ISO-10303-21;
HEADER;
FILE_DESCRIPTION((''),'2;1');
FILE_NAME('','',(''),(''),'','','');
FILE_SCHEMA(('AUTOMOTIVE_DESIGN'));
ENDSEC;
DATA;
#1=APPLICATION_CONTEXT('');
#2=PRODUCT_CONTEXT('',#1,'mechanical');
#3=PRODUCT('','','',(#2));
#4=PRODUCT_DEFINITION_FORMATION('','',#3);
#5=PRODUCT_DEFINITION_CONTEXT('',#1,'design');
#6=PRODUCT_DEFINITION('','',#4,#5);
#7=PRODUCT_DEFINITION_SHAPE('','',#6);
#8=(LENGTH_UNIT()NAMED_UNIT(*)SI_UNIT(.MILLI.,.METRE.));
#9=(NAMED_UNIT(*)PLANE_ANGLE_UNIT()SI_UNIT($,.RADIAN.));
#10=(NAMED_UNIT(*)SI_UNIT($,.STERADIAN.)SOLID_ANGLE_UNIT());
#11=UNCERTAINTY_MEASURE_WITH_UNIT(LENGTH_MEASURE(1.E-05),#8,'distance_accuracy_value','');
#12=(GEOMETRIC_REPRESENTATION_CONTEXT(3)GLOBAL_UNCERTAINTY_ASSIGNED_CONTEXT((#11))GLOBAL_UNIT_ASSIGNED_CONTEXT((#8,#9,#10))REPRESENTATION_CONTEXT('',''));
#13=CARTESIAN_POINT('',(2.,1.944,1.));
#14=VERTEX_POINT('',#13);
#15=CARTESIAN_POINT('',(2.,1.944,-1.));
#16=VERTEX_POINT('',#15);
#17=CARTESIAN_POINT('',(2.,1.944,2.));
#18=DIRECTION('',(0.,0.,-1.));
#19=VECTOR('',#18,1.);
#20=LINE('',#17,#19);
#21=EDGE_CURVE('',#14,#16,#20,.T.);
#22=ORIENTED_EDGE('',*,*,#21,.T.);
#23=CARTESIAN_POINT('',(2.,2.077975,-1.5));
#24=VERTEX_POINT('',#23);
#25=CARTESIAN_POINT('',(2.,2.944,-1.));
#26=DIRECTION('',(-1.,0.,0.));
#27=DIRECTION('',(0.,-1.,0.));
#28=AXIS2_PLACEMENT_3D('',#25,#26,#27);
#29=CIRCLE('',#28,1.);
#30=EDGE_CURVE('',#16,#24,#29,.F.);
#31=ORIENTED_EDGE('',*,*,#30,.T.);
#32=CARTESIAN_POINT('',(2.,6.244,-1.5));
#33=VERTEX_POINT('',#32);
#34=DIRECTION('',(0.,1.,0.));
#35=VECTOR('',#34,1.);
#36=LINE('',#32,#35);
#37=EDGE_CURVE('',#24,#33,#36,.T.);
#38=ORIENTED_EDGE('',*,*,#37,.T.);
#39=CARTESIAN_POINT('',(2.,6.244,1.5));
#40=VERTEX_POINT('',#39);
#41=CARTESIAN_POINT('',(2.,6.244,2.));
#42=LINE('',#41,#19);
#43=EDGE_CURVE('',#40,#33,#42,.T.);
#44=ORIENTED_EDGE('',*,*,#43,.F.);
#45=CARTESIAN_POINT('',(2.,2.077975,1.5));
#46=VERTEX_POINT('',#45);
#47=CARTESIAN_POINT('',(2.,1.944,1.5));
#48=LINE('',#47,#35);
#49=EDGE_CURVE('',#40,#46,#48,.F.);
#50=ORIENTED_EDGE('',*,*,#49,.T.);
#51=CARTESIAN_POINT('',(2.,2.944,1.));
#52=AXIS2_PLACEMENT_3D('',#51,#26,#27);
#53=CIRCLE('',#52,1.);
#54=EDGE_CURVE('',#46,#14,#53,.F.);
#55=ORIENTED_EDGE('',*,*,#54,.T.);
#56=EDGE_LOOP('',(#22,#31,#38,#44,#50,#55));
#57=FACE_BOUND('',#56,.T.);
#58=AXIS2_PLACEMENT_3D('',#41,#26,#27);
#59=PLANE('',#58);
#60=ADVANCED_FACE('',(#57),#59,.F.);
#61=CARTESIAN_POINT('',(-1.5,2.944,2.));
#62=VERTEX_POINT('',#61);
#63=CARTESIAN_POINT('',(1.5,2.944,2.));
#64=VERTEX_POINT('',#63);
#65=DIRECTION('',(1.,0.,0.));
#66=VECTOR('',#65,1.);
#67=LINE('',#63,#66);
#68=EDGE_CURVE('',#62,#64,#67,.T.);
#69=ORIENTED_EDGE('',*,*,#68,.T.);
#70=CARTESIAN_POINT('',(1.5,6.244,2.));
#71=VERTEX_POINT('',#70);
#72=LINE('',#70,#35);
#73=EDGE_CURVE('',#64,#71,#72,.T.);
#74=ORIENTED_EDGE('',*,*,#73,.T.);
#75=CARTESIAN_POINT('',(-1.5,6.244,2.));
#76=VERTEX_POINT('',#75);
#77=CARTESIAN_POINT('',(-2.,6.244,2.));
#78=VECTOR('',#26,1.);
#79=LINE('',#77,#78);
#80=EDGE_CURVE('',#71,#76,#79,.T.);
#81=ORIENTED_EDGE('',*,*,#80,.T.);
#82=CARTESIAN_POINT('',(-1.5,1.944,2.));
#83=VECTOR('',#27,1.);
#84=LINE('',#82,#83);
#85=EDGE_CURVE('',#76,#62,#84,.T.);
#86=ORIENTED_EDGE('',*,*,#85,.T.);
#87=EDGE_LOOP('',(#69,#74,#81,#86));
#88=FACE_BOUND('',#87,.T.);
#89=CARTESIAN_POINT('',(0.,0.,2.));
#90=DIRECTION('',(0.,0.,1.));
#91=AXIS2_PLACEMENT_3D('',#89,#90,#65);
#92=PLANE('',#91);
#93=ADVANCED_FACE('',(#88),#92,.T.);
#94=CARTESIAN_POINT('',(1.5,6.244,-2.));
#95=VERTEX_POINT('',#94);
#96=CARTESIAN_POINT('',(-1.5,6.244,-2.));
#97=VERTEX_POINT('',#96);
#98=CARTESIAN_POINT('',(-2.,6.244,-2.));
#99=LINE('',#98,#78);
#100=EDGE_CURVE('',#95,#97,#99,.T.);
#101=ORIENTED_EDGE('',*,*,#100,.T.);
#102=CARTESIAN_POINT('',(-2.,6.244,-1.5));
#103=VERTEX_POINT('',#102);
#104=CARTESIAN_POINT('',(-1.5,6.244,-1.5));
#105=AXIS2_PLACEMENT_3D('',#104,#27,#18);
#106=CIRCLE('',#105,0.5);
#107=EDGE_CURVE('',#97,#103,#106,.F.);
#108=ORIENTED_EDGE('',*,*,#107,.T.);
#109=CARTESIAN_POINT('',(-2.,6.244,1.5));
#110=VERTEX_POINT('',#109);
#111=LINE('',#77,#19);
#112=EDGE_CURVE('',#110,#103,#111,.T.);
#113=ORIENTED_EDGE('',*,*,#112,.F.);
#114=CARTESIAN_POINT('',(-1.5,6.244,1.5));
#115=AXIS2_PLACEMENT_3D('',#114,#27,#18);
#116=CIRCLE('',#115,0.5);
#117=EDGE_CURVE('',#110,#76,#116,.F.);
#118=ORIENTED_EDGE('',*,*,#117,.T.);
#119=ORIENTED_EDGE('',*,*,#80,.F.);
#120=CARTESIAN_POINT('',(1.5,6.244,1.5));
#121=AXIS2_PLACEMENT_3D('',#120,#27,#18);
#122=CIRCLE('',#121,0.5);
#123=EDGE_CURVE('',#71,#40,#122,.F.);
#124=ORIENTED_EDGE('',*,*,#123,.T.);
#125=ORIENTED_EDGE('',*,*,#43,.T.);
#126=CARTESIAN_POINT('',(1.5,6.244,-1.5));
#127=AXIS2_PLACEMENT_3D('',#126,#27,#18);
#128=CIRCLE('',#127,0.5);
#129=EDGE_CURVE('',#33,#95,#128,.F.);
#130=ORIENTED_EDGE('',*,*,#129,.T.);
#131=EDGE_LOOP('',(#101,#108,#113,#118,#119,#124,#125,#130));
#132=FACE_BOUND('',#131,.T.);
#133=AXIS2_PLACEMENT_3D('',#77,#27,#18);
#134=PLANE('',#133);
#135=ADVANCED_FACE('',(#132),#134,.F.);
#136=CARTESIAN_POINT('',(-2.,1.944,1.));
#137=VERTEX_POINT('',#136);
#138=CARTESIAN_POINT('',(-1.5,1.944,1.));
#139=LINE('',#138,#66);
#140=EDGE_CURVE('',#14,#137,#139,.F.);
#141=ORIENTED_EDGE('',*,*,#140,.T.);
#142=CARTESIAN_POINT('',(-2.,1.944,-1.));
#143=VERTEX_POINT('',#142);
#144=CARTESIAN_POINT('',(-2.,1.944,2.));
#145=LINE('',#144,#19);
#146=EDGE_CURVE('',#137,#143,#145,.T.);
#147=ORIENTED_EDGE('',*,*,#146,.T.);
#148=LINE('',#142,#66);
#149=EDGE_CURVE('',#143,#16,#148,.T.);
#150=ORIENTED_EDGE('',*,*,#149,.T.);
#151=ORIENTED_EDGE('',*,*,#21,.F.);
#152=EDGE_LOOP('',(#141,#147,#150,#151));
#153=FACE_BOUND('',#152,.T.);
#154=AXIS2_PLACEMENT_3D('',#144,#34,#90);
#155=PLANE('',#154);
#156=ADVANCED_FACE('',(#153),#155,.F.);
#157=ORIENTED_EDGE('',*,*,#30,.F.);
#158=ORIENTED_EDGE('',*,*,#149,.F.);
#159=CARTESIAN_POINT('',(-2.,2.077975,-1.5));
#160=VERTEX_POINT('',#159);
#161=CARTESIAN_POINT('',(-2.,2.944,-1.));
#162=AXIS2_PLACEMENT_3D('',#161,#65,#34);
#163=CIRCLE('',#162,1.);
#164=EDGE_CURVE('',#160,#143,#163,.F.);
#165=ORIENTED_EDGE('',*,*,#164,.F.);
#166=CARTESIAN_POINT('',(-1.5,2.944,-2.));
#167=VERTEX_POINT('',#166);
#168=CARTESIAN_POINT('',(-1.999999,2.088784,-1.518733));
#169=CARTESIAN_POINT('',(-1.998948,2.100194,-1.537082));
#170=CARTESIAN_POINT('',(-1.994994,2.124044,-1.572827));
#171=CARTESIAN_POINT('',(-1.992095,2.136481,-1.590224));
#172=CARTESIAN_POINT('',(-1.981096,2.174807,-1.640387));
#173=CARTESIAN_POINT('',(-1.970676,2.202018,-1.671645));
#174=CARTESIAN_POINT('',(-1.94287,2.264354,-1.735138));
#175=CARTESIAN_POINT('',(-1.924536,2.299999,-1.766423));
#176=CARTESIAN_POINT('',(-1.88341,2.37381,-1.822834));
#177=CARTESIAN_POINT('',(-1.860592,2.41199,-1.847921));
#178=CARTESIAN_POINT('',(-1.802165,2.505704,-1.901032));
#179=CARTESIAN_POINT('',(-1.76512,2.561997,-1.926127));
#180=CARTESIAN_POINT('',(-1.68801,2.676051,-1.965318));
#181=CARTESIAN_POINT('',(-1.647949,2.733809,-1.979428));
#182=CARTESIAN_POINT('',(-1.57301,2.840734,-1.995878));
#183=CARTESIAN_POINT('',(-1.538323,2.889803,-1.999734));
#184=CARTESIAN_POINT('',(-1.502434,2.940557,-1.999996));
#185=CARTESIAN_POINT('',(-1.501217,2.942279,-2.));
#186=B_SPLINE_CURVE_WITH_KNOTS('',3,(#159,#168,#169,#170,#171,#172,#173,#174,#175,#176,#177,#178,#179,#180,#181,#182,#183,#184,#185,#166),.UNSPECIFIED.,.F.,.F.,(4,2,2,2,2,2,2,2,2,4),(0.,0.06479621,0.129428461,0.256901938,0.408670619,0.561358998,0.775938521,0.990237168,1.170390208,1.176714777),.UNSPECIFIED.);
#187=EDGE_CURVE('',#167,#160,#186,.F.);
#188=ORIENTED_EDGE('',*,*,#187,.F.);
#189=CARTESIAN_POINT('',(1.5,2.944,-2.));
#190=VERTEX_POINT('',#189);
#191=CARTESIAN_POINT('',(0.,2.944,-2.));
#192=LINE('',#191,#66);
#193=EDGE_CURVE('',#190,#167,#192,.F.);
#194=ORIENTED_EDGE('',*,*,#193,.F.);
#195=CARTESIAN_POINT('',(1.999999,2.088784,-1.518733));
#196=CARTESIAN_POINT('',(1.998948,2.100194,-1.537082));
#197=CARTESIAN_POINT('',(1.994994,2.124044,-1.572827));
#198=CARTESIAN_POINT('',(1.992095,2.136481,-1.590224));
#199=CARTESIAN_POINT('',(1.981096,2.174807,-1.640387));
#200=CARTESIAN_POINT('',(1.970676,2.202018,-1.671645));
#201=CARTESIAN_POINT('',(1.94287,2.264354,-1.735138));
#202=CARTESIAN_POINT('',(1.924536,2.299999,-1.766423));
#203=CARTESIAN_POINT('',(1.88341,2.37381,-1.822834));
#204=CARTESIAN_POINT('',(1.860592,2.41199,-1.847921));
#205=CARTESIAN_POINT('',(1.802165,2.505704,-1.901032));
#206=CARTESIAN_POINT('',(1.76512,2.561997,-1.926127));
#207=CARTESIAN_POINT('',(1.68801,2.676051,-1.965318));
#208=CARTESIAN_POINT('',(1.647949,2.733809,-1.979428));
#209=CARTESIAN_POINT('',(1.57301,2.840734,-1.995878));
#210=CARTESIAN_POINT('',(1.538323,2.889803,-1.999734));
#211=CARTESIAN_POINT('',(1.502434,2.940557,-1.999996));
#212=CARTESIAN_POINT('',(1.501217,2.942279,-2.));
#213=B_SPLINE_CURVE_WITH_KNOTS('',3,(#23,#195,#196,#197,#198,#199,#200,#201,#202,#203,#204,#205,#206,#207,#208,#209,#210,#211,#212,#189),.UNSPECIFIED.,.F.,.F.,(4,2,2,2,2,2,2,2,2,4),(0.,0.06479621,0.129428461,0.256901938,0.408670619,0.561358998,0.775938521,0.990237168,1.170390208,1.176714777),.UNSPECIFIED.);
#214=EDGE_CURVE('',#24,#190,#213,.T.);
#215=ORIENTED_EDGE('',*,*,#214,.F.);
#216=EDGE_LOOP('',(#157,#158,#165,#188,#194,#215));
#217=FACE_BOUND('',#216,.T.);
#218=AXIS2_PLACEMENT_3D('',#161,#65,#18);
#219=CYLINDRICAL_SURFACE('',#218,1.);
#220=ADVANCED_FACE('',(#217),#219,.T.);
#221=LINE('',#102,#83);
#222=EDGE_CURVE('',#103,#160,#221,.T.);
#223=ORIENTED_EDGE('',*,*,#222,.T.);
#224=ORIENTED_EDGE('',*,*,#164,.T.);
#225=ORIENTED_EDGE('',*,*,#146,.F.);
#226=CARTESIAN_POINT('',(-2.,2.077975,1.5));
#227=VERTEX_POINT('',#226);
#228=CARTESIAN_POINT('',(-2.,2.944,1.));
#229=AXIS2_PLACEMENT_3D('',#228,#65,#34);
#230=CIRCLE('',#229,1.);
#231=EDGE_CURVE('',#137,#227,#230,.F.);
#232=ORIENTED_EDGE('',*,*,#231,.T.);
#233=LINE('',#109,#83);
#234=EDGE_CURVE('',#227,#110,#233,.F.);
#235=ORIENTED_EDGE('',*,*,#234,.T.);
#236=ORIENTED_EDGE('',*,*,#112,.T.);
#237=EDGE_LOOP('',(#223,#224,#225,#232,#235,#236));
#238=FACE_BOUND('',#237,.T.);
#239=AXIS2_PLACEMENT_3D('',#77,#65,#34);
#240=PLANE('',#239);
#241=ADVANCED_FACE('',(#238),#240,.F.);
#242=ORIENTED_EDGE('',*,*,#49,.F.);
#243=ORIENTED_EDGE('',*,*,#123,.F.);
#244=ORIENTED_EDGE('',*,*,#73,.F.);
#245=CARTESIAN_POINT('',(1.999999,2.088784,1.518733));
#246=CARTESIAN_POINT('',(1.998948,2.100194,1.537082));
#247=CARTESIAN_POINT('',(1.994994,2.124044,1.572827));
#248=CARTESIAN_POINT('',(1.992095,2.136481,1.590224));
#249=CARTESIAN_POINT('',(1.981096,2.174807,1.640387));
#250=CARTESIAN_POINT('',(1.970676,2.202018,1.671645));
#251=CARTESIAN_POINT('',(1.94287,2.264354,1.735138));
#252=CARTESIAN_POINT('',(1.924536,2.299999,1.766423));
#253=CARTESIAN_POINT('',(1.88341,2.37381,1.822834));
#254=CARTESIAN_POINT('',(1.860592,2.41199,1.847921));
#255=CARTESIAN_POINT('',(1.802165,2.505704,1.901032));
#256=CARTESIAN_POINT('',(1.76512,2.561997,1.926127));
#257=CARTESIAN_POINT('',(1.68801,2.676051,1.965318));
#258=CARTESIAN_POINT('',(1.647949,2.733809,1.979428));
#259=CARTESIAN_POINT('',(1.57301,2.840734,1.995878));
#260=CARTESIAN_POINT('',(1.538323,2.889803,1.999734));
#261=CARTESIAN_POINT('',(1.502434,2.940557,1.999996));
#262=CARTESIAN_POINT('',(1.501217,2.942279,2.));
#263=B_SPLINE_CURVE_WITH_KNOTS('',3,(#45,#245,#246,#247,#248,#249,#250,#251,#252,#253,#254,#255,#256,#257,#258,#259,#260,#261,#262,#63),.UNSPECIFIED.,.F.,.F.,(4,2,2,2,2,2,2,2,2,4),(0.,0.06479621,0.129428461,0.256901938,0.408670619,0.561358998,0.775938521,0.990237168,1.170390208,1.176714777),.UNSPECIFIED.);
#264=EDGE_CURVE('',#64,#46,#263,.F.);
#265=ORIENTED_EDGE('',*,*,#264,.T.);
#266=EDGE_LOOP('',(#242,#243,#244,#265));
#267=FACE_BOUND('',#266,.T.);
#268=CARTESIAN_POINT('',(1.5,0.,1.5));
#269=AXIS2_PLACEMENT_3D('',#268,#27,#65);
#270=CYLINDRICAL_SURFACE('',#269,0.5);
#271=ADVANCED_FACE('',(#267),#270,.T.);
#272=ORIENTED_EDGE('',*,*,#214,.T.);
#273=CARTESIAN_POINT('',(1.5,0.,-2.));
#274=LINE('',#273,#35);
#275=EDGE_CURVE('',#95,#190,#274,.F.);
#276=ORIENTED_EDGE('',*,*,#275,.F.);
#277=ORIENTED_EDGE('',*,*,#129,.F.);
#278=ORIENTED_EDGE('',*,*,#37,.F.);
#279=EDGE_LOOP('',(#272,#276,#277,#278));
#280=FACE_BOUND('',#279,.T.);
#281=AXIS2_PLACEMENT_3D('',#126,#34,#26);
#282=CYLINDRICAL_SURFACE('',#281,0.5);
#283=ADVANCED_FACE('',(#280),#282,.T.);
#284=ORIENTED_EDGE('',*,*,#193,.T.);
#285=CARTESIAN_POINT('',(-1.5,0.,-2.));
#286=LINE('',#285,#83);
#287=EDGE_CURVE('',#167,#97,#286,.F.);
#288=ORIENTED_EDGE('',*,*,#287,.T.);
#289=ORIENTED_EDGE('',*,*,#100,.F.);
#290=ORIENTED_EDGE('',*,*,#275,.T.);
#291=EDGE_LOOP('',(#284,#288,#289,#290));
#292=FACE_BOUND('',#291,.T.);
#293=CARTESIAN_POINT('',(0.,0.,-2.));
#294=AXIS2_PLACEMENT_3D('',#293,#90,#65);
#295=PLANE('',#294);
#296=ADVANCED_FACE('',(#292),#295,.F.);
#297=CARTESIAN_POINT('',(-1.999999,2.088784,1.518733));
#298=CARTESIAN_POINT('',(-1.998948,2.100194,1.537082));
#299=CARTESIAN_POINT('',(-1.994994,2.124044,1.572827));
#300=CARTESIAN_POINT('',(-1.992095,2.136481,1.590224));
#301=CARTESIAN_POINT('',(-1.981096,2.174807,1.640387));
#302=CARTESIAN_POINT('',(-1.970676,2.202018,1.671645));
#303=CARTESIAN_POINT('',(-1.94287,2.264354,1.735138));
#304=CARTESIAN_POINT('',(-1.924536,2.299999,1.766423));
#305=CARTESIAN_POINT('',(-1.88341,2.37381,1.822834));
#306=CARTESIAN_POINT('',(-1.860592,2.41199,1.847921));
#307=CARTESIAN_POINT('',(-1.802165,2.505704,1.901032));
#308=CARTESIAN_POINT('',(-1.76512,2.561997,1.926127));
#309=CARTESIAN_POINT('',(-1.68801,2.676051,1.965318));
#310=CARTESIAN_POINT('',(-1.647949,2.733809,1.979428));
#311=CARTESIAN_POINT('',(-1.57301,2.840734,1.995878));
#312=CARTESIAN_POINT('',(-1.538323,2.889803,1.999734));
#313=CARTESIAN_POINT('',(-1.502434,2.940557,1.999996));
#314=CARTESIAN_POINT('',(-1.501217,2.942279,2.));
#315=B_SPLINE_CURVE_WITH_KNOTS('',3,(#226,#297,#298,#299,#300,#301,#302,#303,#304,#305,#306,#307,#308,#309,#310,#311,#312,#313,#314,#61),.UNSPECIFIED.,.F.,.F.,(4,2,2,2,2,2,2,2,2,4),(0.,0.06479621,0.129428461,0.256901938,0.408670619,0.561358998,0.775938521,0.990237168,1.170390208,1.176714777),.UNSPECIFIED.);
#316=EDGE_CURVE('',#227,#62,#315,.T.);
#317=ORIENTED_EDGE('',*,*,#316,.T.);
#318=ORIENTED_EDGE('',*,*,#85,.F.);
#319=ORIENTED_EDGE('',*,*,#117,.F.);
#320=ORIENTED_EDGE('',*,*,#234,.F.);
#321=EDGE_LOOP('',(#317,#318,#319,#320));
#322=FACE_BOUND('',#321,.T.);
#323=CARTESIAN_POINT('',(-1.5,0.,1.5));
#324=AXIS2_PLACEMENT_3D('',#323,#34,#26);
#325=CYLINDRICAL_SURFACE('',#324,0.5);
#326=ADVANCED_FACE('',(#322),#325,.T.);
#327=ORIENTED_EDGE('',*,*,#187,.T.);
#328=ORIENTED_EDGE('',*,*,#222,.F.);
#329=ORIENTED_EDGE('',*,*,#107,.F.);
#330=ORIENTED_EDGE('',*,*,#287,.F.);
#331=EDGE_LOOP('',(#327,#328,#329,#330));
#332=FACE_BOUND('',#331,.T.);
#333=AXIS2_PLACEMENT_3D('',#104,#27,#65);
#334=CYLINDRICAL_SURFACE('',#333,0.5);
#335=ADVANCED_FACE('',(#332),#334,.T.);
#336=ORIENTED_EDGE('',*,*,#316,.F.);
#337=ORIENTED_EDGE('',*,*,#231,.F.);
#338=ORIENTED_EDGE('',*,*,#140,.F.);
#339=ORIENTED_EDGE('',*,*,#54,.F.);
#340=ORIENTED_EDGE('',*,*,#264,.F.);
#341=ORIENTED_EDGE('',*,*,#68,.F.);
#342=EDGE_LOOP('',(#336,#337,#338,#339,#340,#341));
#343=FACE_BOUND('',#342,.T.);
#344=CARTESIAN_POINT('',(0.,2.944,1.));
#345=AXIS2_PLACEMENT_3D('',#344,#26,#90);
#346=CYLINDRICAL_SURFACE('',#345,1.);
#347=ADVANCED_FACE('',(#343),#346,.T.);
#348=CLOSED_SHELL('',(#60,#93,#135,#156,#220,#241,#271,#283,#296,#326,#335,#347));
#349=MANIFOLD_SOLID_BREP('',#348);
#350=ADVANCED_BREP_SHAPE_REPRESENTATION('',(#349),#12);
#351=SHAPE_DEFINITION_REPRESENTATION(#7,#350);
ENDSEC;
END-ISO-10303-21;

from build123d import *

# Parameters (mm, degrees)
SKETCH1_W           = 4
SKETCH1_H           = 4.3
BOSS_EXTRUDE1_DEPTH = 2
FILLET1_R           = 0.5
FILLET2_R           = 1


with BuildPart() as part:
    # Sketch1 → Boss-Extrude1 (new, symmetric)
    with BuildSketch(Plane.XY):
        with Locations((0, 4.094)):
            Rectangle(SKETCH1_W, SKETCH1_H)
    extrude(amount=BOSS_EXTRUDE1_DEPTH, both=True)

    # Fillet1
    # the kernel refuses this fillet: 0.5 mm, written as the material it takes off along each edge
    with BuildSketch(Plane(origin=(2, 7.494, 2), x_dir=(-1, 0, 0), z_dir=(0, -1, 0)), Plane(origin=(-2, 0.694, 2), x_dir=(1, 0, 0), z_dir=(0, 1, 0)), Plane(origin=(2, 7.494, -2), x_dir=(0, 0, 1), z_dir=(0, -1, 0))) as fillet1_piece_1:
        with BuildLine():
            CenterArc((FILLET1_R, FILLET1_R), FILLET1_R, 180, 90)
            Line((0, FILLET1_R), (-FILLET1_R * 0.02, FILLET1_R))
            Line((-FILLET1_R * 0.02, FILLET1_R), (-FILLET1_R * 0.02, -FILLET1_R * 0.02))
            Line((-FILLET1_R * 0.02, -FILLET1_R * 0.02), (FILLET1_R, -FILLET1_R * 0.02))
            Line((FILLET1_R, -FILLET1_R * 0.02), (FILLET1_R, 0))
        make_face()
    extrude(amount=6.8, mode=Mode.SUBTRACT)
    with BuildSketch(Plane(origin=(-2, 0.694, -2), x_dir=(1, 0, 0), z_dir=(0, 1, 0))) as fillet1_piece_2:
        with BuildLine():
            CenterArc((FILLET1_R, -FILLET1_R), FILLET1_R, 90, 90)
            Line((0, -FILLET1_R), (-FILLET1_R * 0.02, -FILLET1_R))
            Line((-FILLET1_R * 0.02, -FILLET1_R), (-FILLET1_R * 0.02, FILLET1_R * 0.02))
            Line((-FILLET1_R * 0.02, FILLET1_R * 0.02), (FILLET1_R, FILLET1_R * 0.02))
            Line((FILLET1_R, FILLET1_R * 0.02), (FILLET1_R, 0))
        make_face()
    extrude(amount=6.8, mode=Mode.SUBTRACT)

    # Fillet2
    # the kernel refuses this fillet: 1 mm, written as the material it takes off along each edge
    with BuildSketch(Plane(origin=(4, 1.944, 2), x_dir=(0, 1, 0), z_dir=(-1, 0, 0))) as fillet2_piece_1:
        with BuildLine():
            CenterArc((FILLET2_R, FILLET2_R), FILLET2_R, 180, 90)
            Line((0, FILLET2_R), (0, 0))
            Line((0, 0), (FILLET2_R, 0))
        make_face()
    extrude(amount=8, mode=Mode.SUBTRACT)
    with BuildSketch(Plane(origin=(4, 1.944, -2), x_dir=(0, 1, 0), z_dir=(-1, 0, 0))) as fillet2_piece_2:
        with BuildLine():
            CenterArc((FILLET2_R, -FILLET2_R), FILLET2_R, 90, 90)
            Line((0, -FILLET2_R), (0, 0))
            Line((0, 0), (FILLET2_R, 0))
        make_face()
    extrude(amount=8, mode=Mode.SUBTRACT)


solid = part.part
